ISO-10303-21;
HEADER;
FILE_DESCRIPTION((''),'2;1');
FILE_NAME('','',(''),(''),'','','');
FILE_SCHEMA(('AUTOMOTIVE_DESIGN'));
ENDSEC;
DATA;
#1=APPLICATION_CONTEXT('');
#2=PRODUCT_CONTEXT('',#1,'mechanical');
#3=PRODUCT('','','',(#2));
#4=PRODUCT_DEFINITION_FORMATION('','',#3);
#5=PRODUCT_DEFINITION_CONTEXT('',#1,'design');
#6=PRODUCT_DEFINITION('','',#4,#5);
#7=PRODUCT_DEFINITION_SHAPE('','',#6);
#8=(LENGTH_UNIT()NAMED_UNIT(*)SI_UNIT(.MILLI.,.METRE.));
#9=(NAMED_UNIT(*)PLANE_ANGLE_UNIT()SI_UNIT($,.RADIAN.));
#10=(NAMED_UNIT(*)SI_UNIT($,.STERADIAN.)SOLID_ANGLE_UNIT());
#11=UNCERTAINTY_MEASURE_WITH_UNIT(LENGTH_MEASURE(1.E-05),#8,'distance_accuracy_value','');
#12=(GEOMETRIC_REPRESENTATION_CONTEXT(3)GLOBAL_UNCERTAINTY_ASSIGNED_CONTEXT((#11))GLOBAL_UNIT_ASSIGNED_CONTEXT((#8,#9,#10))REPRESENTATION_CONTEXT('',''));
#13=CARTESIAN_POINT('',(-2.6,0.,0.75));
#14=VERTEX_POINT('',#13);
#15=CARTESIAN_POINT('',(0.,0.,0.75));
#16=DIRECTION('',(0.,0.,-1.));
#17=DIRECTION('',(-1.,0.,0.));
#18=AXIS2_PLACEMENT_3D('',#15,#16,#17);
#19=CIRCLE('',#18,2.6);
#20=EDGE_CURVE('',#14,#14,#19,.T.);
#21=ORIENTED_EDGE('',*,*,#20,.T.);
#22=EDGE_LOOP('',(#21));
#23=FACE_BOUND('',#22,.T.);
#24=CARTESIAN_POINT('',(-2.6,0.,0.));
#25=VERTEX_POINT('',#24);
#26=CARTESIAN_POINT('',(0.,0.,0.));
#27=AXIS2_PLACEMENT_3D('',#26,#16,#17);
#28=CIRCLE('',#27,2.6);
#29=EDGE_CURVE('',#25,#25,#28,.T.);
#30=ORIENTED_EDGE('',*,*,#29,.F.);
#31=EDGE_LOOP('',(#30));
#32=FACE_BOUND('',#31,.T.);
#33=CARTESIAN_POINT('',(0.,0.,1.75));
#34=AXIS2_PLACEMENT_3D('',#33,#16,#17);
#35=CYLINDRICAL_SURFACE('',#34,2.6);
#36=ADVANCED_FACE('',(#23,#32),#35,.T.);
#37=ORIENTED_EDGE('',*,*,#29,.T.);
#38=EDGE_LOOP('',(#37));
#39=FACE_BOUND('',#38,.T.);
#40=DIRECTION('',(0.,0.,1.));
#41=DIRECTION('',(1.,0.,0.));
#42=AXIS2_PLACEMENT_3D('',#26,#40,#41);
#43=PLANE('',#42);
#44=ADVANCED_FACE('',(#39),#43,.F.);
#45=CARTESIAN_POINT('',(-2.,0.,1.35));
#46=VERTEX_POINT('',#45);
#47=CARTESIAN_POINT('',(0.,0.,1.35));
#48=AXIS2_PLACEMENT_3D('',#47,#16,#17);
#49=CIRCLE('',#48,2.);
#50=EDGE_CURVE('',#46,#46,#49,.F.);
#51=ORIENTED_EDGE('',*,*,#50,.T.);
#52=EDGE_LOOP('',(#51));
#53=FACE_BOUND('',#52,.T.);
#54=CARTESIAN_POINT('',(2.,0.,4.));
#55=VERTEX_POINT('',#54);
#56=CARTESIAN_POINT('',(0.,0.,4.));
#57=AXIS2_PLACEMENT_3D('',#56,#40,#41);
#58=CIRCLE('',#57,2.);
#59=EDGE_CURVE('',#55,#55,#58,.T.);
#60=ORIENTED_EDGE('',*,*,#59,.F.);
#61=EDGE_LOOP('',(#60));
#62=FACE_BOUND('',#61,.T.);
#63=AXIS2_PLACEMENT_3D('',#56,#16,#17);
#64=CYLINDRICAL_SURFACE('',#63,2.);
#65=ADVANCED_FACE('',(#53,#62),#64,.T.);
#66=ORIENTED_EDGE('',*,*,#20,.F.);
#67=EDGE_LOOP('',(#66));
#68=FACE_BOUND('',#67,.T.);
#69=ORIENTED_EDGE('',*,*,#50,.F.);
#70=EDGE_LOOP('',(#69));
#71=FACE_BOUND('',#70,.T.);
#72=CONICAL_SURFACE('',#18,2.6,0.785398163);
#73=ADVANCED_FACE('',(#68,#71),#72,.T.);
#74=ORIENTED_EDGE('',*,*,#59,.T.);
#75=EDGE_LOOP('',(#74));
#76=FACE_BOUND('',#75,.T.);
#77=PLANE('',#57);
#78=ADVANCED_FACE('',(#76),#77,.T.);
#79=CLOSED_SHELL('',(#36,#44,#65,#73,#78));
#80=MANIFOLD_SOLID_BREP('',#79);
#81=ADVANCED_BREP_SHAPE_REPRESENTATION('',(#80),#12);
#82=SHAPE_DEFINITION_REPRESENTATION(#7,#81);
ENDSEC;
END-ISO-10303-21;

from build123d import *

# Parameters (mm, degrees)
SKETCH1_R           = 2
BOSS_EXTRUDE1_DEPTH = 4
SKETCH2_R           = 2.6
BOSS_EXTRUDE2_DEPTH = 1.75
CHAMFER1_SIZE       = 1


with BuildPart() as part:
    # Sketch1 → Boss-Extrude1 (new body)
    with BuildSketch(Plane.XY):
        Circle(SKETCH1_R)
    extrude(amount=BOSS_EXTRUDE1_DEPTH)

    # Sketch2 → Boss-Extrude2 (add)
    with BuildSketch(Plane(origin=(0, 0, 0), x_dir=(-1, 0, 0), z_dir=(0, 0, -1))):
        Circle(SKETCH2_R)
    extrude(amount=-BOSS_EXTRUDE2_DEPTH)

    # Chamfer1
    # the kernel refuses this chamfer: 1 mm, written as the material it takes off along each edge
    with BuildSketch(Plane(origin=(0, 0, 1.75), x_dir=(-1, 0, 0), z_dir=(0, -1, 0))) as chamfer1_piece_1_section:
        Polygon((2.6, CHAMFER1_SIZE), (2.6 - CHAMFER1_SIZE, 0), (2.6, 0), align=None)
    chamfer1_piece_1 = revolve(axis=Axis((0, 0, 1.75), (0, 0, -1)), mode=Mode.PRIVATE)
    chamfer1_piece_1 = chamfer1_piece_1 - Plane(origin=(0, 0, 1.049223844), x_dir=(1, 0, 0), z_dir=(0, 0, -1)) * Cylinder(2, 11, mode=Mode.PRIVATE)
    add(chamfer1_piece_1, mode=Mode.SUBTRACT)


solid = part.part
